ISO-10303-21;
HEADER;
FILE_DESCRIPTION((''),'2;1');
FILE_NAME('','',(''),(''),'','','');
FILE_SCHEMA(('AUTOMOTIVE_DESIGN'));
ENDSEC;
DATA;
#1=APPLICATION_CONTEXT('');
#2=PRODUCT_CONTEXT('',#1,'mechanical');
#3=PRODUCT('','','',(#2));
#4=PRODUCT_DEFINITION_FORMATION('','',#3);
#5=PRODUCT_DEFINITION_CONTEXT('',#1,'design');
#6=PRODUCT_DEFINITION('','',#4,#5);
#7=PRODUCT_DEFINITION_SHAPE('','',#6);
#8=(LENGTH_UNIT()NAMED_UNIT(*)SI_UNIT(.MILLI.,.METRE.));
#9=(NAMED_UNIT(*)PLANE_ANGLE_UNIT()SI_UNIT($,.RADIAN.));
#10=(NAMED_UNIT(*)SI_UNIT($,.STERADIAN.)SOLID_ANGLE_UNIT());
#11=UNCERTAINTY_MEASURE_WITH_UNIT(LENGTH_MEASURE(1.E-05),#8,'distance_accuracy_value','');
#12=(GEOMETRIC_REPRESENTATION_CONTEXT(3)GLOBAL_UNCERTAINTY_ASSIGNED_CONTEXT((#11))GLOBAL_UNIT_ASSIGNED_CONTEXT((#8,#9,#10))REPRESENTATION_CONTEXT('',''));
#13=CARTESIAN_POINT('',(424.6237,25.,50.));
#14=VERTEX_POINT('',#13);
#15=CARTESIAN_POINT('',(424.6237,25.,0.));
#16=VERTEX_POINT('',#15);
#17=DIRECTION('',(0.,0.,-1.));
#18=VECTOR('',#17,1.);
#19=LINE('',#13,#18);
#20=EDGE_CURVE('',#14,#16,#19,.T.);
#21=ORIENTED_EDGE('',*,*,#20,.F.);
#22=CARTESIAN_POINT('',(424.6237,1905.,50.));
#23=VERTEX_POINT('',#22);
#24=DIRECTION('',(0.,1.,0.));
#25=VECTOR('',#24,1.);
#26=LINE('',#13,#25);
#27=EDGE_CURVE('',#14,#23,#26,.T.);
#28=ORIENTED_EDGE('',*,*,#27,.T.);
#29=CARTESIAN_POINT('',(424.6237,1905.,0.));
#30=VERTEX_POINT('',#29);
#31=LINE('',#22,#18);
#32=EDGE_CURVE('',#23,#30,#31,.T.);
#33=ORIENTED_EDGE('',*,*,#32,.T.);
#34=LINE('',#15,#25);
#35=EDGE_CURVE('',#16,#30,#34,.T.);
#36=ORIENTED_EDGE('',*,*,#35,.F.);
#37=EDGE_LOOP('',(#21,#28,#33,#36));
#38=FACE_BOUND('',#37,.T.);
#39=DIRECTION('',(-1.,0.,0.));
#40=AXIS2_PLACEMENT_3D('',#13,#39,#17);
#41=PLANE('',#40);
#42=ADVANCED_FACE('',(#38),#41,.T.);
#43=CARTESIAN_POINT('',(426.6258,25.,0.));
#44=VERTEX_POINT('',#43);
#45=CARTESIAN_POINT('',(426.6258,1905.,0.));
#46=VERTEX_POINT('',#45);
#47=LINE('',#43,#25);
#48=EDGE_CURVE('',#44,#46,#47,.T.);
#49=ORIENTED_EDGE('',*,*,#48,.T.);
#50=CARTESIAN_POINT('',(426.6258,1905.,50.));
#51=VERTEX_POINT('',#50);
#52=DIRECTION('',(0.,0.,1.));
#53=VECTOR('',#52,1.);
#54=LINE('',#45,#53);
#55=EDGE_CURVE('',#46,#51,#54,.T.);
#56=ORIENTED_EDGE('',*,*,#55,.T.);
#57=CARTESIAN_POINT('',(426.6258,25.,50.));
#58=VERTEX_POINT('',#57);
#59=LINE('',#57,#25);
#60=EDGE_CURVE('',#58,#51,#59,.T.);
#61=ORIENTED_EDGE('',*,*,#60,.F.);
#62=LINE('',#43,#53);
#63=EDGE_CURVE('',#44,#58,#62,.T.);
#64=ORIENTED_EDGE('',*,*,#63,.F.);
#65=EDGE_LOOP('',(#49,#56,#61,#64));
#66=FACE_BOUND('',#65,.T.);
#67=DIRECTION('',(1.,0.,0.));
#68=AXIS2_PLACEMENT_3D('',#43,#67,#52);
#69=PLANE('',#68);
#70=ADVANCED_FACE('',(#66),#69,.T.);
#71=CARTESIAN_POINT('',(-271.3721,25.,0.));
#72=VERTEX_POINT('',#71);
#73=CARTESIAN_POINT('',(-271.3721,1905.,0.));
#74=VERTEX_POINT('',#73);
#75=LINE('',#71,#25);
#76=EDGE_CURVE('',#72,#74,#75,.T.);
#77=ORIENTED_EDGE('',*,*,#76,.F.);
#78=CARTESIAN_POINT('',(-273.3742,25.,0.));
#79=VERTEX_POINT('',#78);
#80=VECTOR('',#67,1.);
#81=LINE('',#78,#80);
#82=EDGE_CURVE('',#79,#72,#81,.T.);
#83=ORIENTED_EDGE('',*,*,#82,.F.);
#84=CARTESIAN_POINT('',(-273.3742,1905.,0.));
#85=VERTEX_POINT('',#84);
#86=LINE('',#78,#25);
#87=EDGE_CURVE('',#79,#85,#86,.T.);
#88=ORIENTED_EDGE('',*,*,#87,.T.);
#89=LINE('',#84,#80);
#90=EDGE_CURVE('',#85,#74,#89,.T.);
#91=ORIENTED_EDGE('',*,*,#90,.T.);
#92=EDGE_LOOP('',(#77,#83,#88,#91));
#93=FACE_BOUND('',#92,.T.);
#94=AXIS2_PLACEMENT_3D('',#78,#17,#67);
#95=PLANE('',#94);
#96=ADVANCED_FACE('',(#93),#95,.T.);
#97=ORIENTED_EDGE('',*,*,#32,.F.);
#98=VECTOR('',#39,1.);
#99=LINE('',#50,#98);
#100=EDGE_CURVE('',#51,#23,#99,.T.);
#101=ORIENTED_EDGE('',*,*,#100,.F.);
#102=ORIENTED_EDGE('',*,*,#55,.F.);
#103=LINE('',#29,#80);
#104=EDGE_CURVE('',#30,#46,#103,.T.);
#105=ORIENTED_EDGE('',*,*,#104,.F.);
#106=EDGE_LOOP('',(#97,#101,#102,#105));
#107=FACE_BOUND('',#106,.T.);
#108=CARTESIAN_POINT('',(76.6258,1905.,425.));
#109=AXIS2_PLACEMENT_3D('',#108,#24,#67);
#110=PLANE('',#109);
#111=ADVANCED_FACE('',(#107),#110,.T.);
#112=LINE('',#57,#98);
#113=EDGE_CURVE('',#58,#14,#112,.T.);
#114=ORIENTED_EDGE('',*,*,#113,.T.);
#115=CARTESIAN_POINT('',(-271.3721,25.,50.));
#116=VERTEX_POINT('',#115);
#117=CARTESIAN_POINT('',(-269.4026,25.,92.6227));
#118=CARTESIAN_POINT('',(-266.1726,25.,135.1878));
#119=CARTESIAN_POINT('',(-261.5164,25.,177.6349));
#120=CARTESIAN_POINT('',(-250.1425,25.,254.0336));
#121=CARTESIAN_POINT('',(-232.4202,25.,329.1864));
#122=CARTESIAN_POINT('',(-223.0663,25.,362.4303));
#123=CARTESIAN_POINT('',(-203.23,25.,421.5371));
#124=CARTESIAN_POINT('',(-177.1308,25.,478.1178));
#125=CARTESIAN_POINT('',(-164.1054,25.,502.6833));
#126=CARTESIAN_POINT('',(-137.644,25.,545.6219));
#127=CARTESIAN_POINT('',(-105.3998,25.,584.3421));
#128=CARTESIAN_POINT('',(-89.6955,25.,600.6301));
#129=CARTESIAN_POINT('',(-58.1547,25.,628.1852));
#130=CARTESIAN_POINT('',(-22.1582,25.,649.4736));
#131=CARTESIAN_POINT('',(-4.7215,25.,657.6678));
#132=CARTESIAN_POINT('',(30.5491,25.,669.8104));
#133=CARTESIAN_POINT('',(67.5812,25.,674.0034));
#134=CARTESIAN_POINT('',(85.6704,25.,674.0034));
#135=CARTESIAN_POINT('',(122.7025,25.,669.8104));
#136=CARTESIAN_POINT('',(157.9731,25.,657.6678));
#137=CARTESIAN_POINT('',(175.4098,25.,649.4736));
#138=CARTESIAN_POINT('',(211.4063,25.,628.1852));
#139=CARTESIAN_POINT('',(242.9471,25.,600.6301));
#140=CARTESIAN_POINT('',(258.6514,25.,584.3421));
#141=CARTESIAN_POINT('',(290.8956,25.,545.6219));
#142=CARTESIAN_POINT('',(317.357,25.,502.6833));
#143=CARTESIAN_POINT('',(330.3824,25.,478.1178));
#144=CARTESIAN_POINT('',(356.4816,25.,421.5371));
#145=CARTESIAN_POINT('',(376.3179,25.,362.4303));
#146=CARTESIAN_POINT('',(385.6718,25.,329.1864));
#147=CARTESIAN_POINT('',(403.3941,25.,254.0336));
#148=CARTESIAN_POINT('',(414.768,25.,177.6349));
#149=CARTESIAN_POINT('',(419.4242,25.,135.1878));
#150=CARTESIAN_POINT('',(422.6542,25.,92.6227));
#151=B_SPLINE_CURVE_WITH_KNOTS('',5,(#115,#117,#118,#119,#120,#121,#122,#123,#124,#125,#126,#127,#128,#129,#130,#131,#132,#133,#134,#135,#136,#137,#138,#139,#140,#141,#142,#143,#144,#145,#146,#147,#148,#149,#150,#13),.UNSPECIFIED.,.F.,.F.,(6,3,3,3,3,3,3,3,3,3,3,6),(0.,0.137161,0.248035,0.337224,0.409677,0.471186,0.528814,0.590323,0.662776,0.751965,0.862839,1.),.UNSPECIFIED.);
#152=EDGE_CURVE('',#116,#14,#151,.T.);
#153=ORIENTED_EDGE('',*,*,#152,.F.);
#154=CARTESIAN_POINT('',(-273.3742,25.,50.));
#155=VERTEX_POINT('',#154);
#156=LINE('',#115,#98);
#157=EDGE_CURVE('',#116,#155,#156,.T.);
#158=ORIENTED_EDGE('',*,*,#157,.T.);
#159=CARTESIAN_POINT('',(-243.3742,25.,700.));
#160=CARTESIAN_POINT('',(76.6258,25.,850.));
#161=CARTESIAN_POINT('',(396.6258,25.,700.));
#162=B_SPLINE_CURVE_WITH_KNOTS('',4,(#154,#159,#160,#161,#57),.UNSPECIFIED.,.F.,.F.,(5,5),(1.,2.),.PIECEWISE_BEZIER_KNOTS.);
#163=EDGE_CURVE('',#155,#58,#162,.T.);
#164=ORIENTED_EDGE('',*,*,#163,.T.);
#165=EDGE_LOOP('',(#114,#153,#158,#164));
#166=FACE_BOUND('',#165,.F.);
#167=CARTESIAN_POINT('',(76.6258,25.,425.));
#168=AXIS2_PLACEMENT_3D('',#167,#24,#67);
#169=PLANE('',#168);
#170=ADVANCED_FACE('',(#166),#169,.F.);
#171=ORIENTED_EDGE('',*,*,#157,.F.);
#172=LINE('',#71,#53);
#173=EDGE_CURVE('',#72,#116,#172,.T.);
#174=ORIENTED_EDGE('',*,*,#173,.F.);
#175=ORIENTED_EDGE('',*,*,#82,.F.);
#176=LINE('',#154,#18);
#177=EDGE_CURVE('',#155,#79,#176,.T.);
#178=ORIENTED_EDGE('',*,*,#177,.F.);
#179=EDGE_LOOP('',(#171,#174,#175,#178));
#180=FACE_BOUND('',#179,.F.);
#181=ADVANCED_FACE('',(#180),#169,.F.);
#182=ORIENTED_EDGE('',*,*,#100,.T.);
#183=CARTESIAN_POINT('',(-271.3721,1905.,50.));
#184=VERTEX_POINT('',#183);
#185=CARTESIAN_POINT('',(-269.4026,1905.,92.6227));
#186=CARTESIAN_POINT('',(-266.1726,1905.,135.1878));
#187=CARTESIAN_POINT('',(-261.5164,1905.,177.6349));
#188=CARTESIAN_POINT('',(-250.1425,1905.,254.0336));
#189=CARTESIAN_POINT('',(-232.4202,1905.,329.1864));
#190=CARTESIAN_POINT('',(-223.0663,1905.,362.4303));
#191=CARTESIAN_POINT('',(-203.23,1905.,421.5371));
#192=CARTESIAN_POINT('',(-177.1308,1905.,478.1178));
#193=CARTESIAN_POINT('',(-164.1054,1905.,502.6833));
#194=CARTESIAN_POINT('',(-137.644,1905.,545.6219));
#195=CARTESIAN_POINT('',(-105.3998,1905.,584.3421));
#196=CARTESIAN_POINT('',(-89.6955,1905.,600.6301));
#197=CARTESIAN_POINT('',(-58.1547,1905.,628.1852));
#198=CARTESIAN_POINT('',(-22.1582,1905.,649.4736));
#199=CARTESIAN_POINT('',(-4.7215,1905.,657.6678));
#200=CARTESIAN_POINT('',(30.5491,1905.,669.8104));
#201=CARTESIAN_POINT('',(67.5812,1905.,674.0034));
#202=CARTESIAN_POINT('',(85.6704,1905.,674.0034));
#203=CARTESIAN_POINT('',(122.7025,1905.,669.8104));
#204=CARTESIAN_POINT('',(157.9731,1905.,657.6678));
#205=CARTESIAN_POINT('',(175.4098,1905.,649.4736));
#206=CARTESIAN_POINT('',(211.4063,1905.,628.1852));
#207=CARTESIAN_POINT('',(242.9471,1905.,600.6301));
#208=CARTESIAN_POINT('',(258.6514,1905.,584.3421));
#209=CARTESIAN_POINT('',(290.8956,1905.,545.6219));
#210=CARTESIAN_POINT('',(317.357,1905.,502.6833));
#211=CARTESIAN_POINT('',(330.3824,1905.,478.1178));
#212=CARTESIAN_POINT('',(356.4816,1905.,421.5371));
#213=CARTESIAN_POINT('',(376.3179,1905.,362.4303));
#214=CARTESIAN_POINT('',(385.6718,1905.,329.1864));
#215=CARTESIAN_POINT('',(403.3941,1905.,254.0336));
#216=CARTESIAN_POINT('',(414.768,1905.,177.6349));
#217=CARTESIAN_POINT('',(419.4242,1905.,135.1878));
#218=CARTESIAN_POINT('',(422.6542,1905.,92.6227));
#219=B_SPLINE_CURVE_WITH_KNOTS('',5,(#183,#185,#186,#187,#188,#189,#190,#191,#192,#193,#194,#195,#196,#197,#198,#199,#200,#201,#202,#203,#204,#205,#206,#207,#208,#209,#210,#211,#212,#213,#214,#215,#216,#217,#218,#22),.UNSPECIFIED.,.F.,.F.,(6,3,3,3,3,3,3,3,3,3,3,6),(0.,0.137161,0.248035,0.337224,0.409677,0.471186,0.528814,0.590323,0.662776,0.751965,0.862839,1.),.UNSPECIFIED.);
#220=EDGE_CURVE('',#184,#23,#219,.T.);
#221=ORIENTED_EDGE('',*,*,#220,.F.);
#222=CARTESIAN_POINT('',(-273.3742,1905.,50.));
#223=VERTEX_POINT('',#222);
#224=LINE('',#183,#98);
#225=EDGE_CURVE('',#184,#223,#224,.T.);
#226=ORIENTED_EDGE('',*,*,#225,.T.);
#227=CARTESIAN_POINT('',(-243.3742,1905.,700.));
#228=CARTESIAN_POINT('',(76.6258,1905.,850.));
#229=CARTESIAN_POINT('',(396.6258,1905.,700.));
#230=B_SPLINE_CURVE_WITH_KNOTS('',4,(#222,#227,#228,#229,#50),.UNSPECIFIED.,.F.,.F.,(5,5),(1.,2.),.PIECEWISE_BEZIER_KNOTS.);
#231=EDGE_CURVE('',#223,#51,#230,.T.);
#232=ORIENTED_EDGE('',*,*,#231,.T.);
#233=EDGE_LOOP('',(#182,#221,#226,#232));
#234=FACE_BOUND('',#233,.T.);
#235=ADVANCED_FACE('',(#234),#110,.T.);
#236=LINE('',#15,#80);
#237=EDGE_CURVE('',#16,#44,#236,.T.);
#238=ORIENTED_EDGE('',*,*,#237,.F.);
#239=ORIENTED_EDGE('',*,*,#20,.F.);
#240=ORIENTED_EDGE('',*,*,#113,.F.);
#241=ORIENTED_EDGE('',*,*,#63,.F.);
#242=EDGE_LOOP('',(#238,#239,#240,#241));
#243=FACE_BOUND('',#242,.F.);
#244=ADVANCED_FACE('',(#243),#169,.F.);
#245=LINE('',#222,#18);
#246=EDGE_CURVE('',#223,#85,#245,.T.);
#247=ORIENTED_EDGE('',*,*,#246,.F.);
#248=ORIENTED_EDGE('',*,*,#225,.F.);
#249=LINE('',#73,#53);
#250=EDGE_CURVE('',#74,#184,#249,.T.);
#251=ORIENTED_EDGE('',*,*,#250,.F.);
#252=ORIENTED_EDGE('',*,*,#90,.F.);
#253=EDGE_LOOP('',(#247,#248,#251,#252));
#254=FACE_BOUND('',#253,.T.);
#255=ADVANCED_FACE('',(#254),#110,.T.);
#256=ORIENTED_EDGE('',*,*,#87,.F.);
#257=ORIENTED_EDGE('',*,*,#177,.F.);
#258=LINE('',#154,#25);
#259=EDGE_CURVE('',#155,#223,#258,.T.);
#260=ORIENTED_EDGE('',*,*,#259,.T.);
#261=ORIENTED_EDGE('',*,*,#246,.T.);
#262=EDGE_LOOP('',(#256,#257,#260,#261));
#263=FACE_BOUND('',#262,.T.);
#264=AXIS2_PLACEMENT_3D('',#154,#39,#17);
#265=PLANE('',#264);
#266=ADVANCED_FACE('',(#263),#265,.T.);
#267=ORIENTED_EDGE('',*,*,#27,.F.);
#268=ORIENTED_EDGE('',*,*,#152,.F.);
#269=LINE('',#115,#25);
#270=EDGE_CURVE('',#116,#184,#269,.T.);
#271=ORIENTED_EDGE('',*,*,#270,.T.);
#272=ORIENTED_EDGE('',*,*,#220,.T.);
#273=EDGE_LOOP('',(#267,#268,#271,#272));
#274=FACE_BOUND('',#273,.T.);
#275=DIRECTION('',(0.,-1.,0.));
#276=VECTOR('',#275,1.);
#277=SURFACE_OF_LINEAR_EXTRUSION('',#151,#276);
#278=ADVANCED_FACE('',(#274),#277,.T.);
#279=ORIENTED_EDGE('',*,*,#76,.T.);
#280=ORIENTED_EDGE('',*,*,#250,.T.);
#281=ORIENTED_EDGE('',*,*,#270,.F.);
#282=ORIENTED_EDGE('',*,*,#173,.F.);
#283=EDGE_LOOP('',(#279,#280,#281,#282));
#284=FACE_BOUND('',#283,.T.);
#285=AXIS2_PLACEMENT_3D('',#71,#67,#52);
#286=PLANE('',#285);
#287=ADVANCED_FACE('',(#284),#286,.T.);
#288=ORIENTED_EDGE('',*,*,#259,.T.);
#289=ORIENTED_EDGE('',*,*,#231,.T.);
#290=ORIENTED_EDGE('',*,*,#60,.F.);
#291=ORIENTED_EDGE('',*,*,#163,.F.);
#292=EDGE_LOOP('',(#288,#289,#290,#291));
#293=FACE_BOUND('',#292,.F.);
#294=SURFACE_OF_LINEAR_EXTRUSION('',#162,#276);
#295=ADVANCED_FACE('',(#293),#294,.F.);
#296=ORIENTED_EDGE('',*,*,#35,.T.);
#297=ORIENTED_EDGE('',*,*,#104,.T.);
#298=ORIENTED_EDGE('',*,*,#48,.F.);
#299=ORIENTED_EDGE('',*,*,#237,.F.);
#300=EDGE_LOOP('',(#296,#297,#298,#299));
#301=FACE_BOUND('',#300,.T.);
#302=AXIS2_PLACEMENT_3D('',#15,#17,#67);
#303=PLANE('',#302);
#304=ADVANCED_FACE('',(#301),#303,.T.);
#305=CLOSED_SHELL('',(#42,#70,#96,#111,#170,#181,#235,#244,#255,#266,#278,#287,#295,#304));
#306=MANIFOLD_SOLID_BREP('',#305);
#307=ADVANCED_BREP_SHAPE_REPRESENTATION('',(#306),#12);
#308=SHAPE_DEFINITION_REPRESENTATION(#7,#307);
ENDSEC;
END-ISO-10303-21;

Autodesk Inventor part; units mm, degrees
ref_plane "YZ Plane" through (0, 0, 0) normal (1, 0, 0) x (0, 1, 0)
ref_plane "XZ Plane" through (0, 0, 0) normal (0, 1, 0) x (-1, 0, 0)
ref_plane "Work Plane1" through (76.6258, 25, 425) normal (-0.0000002, 1, 0) x (1, 0.0000002, 0)
sketch "Sketch1" plane through (76.6258, 25, 425) normal (-0.0000002, 1, 0) x (1, 0.0000002, 0)
  spline S0 degree 4 poles (-350, 375) (-320, -275) (0, -425) (320, -275) (350, 375) knots 1 1 1 1 1 2 2 2 2 2 projected
  line L0 (350, 375) -> (347.9979, 375)
  line L1 (347.9979, 375) -> (347.9979, 425)
  line L2 (347.9979, 425) -> (350, 425)
  line L3 (350, 425) -> (350, 375)
  line L4 (-347.9979, 375) -> (-350, 375)
  line L5 (-350, 375) -> (-350, 425)
  line L6 (-350, 425) -> (-347.9979, 425)
  line L7 (-347.9979, 425) -> (-347.9979, 375)
  line L8 (350, 425) -> (-350, 425) projected
  spline S1 degree 5 poles (-347.9979, 375) (-346.0284, 332.3773) (-342.7984, 289.8122) (-338.1422, 247.3651) (-326.7683, 170.9664) (-309.046, 95.8136) (-299.6921, 62.5697) (-279.8558, 3.4629) (-253.7566, -53.1178) (-240.7312, -77.6833) (-214.2698, -120.6219) (-182.0256, -159.3421) (-166.3213, -175.6301) (-134.7805, -203.1852) (-98.784, -224.4736) (-81.3473, -232.6678) (-46.0767, -244.8104) (-9.0446, -249.0034) (9.0446, -249.0034) (46.0767, -244.8104) (81.3473, -232.6678) (98.784, -224.4736) (134.7805, -203.1852) (166.3213, -175.6301) (182.0256, -159.3421) (214.2698, -120.6219) (240.7312, -77.6833) (253.7566, -53.1178) (279.8558, 3.4629) (299.6921, 62.5697) (309.046, 95.8136) (326.7683, 170.9664) (338.1422, 247.3651) (342.7984, 289.8122) (346.0284, 332.3773) (347.9979, 375) knots 0 0 0 0 0 0 0.137161 0.137161 0.137161 0.248035 0.248035 0.248035 0.337224 0.337224 0.337224 0.409677 0.409677 0.409677 0.471186 0.471186 0.471186 0.528814 0.528814 0.528814 0.590323 0.590323 0.590323 0.662776 0.662776 0.662776 0.751965 0.751965 0.751965 0.862839 0.862839 0.862839 1 1 1 1 1 1
  point P0 (-76.6258, 425)
  dimension "d0" = 2
ref_plane "Work Plane2" through (-283.6242, 1904.9999, -0.2055) normal (0.0000002, -1, 0) x (1, 0.0000002, 0)
extrude "Extrusion1" add sketch "Sketch1" along normal up to surface (1880 mm away) contours L4 S1 L0 S0 | L5 L6 L7 L4 | L0 L1 L2 L3
properties part number "canvas-cover-deployed"
